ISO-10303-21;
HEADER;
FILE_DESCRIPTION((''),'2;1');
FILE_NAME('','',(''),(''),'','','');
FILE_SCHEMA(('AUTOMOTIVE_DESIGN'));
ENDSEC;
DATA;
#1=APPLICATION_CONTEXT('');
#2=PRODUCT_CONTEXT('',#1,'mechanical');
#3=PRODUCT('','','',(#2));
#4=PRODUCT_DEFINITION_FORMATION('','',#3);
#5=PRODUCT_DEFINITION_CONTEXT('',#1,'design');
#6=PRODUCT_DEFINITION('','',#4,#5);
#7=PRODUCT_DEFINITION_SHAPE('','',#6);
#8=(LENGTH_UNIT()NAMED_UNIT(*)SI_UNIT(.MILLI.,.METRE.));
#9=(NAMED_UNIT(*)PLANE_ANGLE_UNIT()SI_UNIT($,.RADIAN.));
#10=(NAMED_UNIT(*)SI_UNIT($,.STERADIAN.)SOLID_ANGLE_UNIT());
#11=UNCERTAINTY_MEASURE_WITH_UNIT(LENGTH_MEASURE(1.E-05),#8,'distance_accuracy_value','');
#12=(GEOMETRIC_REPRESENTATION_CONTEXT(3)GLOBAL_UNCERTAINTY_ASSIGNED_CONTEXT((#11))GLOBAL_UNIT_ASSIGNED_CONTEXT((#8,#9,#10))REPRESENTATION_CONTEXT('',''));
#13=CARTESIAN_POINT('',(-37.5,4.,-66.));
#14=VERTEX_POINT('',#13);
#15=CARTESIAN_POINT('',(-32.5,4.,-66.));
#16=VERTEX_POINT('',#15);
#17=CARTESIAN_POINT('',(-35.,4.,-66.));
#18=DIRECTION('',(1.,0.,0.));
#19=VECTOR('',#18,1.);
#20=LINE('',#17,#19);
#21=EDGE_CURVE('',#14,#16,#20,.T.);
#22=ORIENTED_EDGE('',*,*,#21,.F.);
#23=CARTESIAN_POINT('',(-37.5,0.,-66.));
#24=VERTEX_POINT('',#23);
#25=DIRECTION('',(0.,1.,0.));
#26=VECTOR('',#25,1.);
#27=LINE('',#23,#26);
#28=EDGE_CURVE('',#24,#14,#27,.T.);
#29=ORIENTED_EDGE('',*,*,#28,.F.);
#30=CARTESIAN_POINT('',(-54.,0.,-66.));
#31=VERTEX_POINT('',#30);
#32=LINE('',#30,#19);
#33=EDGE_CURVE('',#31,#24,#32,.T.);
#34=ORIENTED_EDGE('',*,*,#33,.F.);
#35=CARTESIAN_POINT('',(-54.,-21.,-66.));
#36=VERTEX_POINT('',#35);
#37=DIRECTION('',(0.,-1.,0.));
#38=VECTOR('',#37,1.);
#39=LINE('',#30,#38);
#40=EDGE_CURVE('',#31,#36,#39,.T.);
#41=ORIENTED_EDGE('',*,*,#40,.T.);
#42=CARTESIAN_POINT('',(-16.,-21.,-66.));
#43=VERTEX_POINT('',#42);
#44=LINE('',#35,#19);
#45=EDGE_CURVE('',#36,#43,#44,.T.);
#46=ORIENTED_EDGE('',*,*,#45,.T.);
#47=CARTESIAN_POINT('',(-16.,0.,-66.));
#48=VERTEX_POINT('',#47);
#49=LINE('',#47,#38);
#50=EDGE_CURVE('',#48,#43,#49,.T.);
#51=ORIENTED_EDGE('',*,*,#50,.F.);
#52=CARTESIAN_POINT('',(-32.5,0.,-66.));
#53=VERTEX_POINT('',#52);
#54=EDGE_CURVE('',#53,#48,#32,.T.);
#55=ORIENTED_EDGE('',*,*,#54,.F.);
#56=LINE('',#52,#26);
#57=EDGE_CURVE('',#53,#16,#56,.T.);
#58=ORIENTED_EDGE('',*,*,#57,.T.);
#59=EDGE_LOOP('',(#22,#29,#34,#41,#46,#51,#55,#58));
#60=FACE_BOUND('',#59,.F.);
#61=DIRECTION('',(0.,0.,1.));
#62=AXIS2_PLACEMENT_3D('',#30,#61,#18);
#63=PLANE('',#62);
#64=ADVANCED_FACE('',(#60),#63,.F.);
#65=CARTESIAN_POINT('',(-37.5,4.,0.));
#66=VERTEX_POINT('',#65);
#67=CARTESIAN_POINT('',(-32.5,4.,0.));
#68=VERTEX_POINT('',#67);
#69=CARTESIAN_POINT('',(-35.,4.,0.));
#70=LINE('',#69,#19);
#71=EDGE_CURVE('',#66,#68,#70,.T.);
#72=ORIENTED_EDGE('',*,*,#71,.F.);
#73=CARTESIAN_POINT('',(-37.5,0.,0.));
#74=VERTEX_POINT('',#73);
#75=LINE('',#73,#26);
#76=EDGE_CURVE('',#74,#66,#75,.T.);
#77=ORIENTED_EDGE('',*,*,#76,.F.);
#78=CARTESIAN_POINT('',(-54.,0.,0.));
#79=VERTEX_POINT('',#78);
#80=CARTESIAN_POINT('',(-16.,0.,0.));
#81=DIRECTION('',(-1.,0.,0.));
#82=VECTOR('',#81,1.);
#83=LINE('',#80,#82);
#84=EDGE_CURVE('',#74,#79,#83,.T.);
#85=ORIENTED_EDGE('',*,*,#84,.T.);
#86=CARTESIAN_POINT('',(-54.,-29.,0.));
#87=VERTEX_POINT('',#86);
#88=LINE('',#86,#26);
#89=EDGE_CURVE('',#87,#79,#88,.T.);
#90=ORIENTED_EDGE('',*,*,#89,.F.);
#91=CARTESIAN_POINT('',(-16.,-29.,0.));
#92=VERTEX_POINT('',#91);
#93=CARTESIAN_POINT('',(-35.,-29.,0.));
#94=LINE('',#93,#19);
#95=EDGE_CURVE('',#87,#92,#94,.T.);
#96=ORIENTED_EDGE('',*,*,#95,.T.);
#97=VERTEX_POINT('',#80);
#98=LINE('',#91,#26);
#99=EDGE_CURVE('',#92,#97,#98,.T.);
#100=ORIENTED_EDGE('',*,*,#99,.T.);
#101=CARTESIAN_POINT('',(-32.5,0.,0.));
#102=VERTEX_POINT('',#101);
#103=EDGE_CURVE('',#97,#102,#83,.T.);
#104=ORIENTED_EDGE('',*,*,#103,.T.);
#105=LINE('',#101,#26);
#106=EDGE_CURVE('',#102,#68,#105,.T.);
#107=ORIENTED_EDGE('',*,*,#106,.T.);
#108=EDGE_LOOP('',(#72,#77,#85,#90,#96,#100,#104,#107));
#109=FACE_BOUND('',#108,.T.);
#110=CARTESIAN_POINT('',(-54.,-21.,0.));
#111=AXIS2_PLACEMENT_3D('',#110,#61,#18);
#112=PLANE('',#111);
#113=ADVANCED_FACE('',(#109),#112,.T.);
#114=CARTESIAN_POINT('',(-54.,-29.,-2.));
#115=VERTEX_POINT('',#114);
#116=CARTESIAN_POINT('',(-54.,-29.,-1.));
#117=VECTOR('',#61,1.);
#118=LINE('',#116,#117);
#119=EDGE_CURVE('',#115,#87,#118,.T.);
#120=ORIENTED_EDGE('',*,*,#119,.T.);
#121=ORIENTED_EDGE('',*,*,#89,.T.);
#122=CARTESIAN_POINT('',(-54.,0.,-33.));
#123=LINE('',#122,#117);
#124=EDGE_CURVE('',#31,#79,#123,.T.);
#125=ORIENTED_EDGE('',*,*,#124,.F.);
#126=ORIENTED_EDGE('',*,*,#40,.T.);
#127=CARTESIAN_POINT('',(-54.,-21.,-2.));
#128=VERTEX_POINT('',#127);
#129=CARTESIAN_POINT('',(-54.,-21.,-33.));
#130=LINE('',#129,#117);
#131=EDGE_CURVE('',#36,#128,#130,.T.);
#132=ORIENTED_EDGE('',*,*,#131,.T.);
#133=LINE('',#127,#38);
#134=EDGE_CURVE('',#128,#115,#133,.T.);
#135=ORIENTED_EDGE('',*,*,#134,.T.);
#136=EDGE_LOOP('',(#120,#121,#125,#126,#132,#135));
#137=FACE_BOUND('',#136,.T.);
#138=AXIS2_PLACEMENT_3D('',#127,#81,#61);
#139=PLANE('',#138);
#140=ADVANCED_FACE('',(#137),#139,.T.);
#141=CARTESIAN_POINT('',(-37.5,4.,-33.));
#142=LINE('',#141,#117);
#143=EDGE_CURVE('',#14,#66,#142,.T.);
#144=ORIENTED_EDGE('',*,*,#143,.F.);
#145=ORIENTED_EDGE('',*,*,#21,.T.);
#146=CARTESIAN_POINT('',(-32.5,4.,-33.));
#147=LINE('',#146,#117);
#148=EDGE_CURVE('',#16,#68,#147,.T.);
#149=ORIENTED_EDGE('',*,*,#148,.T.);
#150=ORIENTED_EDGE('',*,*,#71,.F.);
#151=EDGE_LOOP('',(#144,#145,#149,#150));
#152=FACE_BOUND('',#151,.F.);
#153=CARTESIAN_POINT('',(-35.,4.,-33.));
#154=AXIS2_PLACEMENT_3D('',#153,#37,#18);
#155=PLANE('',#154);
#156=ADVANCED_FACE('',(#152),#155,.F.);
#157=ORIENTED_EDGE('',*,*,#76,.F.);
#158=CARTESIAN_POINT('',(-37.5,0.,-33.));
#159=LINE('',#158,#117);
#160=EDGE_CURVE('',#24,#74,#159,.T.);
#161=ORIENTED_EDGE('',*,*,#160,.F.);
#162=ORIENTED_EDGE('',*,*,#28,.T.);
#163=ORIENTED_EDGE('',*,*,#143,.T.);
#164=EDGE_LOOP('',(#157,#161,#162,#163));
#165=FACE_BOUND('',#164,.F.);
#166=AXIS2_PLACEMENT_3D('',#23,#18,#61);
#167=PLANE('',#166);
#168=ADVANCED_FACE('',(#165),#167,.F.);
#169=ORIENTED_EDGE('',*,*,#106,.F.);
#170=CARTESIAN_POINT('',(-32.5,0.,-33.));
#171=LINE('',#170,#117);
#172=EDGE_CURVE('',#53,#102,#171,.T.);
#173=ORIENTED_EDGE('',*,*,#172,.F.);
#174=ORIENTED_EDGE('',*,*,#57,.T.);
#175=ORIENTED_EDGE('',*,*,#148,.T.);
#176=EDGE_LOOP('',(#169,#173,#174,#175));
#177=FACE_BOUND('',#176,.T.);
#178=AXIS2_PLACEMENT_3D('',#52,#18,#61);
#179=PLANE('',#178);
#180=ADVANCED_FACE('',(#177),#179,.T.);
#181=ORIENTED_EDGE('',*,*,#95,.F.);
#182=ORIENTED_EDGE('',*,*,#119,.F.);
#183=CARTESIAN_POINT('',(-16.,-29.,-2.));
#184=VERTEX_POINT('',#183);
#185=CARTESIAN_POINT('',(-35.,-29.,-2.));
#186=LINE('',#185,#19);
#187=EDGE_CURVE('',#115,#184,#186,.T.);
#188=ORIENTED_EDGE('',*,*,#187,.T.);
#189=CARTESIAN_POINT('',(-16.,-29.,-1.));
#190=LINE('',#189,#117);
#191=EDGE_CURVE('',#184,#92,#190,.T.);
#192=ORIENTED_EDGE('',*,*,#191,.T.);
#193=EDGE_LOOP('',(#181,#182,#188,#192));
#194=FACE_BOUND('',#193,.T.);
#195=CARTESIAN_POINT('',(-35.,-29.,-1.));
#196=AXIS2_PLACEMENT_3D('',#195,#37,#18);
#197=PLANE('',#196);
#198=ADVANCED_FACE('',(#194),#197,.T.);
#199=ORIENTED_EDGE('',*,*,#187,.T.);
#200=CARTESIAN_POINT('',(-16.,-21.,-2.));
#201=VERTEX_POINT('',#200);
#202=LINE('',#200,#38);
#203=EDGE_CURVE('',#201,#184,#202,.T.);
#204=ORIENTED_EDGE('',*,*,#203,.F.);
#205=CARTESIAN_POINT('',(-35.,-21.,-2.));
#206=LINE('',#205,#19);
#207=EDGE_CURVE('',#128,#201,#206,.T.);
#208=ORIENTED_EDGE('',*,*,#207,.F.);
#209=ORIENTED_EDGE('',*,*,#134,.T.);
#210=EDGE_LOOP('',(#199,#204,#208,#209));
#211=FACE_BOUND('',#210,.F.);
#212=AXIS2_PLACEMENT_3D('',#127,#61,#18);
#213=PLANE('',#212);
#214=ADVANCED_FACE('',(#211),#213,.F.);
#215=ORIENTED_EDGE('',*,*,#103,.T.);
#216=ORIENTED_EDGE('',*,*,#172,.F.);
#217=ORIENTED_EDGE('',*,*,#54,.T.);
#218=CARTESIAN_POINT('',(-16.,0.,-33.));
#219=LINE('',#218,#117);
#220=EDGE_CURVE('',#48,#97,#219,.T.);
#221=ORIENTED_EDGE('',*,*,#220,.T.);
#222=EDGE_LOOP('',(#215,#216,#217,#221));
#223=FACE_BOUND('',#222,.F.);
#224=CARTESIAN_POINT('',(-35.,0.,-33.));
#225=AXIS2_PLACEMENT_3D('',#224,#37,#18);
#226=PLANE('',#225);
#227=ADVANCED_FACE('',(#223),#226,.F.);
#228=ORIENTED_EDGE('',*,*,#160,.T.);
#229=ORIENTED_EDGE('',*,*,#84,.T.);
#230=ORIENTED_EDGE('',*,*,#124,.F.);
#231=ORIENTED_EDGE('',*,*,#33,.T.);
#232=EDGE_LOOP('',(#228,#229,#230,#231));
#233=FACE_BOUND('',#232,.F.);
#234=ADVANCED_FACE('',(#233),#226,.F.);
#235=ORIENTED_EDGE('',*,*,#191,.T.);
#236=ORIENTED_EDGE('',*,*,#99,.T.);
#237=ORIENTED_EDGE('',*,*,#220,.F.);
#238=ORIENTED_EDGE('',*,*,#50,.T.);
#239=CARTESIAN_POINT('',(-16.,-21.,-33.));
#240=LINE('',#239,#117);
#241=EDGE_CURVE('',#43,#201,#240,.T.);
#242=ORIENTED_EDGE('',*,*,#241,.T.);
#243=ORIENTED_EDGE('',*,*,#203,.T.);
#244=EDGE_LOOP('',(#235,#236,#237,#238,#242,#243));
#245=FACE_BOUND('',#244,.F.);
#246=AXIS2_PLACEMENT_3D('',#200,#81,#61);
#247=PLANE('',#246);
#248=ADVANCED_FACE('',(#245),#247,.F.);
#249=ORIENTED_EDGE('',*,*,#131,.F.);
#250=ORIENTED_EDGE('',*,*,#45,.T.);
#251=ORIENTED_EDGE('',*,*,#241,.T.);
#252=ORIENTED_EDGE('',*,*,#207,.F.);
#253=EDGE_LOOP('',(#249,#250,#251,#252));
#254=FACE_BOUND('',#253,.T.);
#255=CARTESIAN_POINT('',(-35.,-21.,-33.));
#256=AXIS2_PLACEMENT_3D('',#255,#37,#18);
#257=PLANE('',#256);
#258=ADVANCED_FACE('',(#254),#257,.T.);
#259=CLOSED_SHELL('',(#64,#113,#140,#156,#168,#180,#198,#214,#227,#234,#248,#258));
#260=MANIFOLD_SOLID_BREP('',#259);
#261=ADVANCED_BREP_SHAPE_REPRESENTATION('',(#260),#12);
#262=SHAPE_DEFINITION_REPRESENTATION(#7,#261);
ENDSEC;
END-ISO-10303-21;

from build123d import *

# Parameters (mm, degrees)
F0_W     = 5
F0_H     = 66
F0_W_2   = 16.5
F1_DEPTH = 21
F2_DEPTH = 4
F3_W     = 38
F3_H     = 2
F4_DEPTH = 8


# Not quite as in the source:
# - a feature names something its author has since deleted; it is built from what else it names


with BuildPart() as f1:
    # F0 (on Front) → F1 (new body)
    with BuildSketch(Plane.XZ):
        with Locations((-35, -33)):
            Rectangle(F0_W, F0_H)
        with Locations((-45.75, -33)):
            Rectangle(F0_W_2, F0_H)
        with Locations((-24.25, -33)):
            Rectangle(F0_W_2, F0_H)
    extrude(amount=F1_DEPTH)

    # F0 (on Front) → F2 (join)
    with BuildSketch(Plane.XZ):
        with Locations((-35, -33)):
            Rectangle(F0_W, F0_H)
    extrude(amount=-F2_DEPTH)

    # F3 (on face) → F4 (join)
    with BuildSketch(Plane.XZ.offset(21)):
        with Locations((-35, -1)):
            Rectangle(F3_W, F3_H)
    extrude(amount=F4_DEPTH)


solid = f1.part
